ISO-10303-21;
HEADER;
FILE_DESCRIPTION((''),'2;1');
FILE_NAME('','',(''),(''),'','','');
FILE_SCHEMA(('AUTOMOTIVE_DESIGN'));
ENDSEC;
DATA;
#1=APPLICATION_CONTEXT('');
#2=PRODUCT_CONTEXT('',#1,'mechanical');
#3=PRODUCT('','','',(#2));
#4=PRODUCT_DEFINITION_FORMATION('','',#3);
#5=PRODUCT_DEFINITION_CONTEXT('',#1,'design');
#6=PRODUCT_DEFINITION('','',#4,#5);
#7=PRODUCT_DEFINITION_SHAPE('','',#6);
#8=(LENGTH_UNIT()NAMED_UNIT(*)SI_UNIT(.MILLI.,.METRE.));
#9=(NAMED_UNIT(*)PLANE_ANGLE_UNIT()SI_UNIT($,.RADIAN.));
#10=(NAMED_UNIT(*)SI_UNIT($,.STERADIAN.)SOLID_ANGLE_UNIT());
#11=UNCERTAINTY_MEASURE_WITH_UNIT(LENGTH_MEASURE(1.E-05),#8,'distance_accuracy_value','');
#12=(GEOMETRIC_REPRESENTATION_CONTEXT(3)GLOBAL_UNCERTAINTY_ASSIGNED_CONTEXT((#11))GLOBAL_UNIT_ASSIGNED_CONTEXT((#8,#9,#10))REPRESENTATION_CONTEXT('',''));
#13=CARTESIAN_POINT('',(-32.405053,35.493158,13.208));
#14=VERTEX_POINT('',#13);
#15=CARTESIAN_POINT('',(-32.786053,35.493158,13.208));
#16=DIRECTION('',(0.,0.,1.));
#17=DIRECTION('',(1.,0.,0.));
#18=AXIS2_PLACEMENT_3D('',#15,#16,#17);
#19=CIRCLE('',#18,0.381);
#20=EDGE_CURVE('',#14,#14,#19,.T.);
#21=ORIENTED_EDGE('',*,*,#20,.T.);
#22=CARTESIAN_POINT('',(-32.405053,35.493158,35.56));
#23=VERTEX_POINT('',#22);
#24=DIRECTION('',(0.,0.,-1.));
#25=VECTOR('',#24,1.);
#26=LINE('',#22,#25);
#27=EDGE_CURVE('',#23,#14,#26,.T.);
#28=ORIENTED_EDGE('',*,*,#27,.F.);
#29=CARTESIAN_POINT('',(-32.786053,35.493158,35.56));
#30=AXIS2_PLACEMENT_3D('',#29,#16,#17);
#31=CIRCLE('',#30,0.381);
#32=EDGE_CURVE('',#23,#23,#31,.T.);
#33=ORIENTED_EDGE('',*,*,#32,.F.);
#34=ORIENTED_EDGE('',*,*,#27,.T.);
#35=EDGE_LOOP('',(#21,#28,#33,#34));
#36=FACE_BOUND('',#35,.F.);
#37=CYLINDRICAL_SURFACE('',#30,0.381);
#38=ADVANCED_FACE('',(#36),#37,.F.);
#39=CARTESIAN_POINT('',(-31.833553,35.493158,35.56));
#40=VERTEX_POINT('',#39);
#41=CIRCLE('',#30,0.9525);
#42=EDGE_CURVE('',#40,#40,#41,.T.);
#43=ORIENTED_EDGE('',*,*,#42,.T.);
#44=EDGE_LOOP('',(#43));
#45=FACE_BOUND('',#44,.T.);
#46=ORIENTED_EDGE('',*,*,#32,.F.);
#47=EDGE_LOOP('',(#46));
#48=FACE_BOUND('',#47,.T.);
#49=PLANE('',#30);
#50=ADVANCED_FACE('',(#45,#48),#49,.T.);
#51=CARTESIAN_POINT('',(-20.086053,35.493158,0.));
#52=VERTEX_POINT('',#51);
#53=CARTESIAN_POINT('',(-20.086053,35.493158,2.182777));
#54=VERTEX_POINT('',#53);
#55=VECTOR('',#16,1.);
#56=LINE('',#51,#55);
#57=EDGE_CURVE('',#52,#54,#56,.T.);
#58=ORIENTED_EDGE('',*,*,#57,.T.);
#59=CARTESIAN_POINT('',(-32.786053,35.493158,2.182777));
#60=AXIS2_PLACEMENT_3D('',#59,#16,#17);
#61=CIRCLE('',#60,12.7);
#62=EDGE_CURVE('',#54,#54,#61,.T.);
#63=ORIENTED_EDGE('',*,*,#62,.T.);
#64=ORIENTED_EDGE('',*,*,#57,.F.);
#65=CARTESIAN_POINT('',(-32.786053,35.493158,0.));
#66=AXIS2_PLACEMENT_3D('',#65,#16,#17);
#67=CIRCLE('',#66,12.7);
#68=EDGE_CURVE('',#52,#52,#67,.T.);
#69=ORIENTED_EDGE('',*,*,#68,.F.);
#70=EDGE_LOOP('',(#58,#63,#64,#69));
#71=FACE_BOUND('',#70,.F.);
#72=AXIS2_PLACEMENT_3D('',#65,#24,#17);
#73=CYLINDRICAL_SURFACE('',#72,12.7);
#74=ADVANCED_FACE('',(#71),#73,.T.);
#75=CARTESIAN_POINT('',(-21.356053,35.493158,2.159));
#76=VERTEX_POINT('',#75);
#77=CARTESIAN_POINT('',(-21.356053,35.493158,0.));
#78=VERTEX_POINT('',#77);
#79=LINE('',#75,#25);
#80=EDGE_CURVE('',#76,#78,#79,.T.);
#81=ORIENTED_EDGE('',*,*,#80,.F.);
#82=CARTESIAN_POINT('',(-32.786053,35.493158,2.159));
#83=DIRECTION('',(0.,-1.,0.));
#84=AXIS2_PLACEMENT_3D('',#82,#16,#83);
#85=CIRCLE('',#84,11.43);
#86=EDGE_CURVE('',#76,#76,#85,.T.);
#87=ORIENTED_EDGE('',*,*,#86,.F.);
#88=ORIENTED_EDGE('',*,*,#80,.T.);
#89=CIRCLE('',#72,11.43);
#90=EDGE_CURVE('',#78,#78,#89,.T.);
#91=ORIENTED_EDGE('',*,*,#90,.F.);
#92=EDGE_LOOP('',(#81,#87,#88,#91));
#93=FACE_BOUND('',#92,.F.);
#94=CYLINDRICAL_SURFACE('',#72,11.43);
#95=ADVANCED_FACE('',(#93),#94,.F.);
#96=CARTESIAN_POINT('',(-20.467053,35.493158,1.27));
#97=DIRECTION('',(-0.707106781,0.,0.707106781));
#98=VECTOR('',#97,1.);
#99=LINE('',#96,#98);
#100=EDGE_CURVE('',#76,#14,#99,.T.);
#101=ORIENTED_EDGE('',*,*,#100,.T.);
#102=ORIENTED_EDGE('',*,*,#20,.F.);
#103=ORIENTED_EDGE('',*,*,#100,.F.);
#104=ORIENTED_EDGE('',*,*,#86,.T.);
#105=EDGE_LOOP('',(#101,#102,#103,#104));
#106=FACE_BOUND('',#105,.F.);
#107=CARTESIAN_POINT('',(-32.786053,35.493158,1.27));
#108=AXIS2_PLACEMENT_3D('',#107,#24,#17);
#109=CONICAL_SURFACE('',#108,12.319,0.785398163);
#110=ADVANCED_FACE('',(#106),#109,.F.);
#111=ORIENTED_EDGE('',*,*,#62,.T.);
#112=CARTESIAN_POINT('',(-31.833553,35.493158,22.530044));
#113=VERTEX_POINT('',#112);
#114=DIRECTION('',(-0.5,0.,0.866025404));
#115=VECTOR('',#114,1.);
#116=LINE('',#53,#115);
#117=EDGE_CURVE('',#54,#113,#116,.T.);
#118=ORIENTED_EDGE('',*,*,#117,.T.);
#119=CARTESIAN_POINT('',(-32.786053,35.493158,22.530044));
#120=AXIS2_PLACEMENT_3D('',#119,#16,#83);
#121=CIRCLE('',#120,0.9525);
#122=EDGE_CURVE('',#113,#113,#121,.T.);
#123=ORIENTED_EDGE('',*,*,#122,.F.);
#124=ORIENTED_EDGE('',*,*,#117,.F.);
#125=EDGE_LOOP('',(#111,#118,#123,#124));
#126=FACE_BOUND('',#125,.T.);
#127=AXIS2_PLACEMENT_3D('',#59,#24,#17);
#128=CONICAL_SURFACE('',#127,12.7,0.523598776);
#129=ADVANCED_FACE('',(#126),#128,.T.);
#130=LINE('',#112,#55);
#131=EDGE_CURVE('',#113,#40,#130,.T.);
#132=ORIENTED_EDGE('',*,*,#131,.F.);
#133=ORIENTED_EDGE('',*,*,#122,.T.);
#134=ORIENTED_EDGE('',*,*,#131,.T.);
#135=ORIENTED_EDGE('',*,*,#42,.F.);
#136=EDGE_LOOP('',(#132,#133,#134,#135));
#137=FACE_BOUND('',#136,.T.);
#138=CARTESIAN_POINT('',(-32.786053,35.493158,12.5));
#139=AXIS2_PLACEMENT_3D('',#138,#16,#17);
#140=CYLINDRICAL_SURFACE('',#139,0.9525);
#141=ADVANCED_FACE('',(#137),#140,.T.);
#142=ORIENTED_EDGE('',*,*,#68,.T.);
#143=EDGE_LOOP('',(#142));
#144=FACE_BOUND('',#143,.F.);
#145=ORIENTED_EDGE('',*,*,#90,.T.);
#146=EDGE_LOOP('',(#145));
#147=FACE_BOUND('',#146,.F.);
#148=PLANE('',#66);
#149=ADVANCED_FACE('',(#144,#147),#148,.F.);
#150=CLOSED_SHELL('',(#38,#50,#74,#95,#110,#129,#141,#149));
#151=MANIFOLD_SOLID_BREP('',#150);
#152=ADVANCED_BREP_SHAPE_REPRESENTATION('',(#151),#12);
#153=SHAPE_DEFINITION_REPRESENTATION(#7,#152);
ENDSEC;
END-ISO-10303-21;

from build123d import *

# Parameters (mm, degrees)
F0_R        = 12.7
F1_DEPTH    = 22.86
F2_R        = 0.9525
F3_DEPTH    = 12.7
F4_R        = 0.381
F5_DEPTH    = 35.561
F6_S5_R     = 0.9525
F6_T6_DEPTH = 22
F7_R        = 11.43
F8_DEPTH    = 1.27
F9_S5_R     = 11.43
F9_T6_DEPTH = 20


# Not quite as in the source:
# - a fillet or chamfer that OpenCascade refuses, or shapes differently, is made with other operations: its cross-section is extruded or revolved along the edge and cut away or added


with BuildPart() as f1:
    # F0 (on Top) → F1 (new body)
    with BuildSketch(Plane.XY):
        with Locations((-32.7860526741, 35.493157804)):
            Circle(F0_R)
    extrude(amount=F1_DEPTH)

    # F2 (on face) → F3 (join)
    with BuildSketch(Plane.XY.offset(22.86)):
        with Locations((-32.7860526741, 35.493157804)):
            Circle(F2_R)
    extrude(amount=F3_DEPTH)

    # F4 (on face) → F5 (cut, through all)
    with BuildSketch(Plane.XY.offset(35.56)):
        with Locations((-32.7860526741, 35.493157804)):
            Circle(F4_R)
    extrude(amount=-F5_DEPTH, mode=Mode.SUBTRACT)

    # F6: chamfer of 11.938 x 20.6772225408 on 1 edges, made by hand


with BuildPart() as f6_tool2:
    # F6_s3 → F6_t4 (revolve)
    with BuildSketch(Plane.XZ.offset(-35.493157804)):
        Polygon((-20.0860526741, 2.1827774592), (-32.0240526741, 22.86), (-20.0860526741, 22.86), align=None)
    revolve(axis=Axis((-32.7860526741, 35.493157804, 22.86), (0, 0, 1)))

    # F6_s5 → F6_t6 (cut, symmetric)
    with BuildSketch(Plane.XY.offset(12.5)):
        with Locations((-32.7860526741, 35.493157804)):
            Circle(F6_S5_R)
    extrude(amount=F6_T6_DEPTH, both=True, mode=Mode.SUBTRACT)


with BuildPart() as f1_1:
    add(f1.part)

    # F6_t1: cut F6_tool2
    add(f6_tool2.part, mode=Mode.SUBTRACT)

    # F7 (on face) → F8 (cut)
    with BuildSketch(Plane(origin=(0, 0, 0), x_dir=(1, 0, 0), z_dir=(0, 0, -1))):
        with Locations((-32.7860526741, -35.493157804)):
            Circle(F7_R)
    extrude(amount=-F8_DEPTH, mode=Mode.SUBTRACT)

    # F9: chamfer of 11.938 on 1 edges, made by hand


with BuildPart() as f9_tool2:
    # F9_s3 → F9_t4 (revolve)
    with BuildSketch(Plane.XZ.offset(-35.493157804)):
        Polygon((-20.4670526741, 1.27), (-32.4050526741, 13.208), (-32.4050526741, 1.27), align=None)
    revolve(axis=Axis((-32.7860526741, 35.493157804, 1.27), (0, 0, 1)))

    # F9_s5 → F9_t6 (intersect, symmetric)
    with BuildSketch(Plane.XY.offset(7.2)):
        with Locations((-32.7860526741, 35.493157804)):
            Circle(F9_S5_R)
    extrude(amount=F9_T6_DEPTH, both=True, mode=Mode.INTERSECT)


with BuildPart() as f1_2:
    add(f1_1.part)

    # F9_t1: cut F9_tool2
    add(f9_tool2.part, mode=Mode.SUBTRACT)


solid = f1_2.part
